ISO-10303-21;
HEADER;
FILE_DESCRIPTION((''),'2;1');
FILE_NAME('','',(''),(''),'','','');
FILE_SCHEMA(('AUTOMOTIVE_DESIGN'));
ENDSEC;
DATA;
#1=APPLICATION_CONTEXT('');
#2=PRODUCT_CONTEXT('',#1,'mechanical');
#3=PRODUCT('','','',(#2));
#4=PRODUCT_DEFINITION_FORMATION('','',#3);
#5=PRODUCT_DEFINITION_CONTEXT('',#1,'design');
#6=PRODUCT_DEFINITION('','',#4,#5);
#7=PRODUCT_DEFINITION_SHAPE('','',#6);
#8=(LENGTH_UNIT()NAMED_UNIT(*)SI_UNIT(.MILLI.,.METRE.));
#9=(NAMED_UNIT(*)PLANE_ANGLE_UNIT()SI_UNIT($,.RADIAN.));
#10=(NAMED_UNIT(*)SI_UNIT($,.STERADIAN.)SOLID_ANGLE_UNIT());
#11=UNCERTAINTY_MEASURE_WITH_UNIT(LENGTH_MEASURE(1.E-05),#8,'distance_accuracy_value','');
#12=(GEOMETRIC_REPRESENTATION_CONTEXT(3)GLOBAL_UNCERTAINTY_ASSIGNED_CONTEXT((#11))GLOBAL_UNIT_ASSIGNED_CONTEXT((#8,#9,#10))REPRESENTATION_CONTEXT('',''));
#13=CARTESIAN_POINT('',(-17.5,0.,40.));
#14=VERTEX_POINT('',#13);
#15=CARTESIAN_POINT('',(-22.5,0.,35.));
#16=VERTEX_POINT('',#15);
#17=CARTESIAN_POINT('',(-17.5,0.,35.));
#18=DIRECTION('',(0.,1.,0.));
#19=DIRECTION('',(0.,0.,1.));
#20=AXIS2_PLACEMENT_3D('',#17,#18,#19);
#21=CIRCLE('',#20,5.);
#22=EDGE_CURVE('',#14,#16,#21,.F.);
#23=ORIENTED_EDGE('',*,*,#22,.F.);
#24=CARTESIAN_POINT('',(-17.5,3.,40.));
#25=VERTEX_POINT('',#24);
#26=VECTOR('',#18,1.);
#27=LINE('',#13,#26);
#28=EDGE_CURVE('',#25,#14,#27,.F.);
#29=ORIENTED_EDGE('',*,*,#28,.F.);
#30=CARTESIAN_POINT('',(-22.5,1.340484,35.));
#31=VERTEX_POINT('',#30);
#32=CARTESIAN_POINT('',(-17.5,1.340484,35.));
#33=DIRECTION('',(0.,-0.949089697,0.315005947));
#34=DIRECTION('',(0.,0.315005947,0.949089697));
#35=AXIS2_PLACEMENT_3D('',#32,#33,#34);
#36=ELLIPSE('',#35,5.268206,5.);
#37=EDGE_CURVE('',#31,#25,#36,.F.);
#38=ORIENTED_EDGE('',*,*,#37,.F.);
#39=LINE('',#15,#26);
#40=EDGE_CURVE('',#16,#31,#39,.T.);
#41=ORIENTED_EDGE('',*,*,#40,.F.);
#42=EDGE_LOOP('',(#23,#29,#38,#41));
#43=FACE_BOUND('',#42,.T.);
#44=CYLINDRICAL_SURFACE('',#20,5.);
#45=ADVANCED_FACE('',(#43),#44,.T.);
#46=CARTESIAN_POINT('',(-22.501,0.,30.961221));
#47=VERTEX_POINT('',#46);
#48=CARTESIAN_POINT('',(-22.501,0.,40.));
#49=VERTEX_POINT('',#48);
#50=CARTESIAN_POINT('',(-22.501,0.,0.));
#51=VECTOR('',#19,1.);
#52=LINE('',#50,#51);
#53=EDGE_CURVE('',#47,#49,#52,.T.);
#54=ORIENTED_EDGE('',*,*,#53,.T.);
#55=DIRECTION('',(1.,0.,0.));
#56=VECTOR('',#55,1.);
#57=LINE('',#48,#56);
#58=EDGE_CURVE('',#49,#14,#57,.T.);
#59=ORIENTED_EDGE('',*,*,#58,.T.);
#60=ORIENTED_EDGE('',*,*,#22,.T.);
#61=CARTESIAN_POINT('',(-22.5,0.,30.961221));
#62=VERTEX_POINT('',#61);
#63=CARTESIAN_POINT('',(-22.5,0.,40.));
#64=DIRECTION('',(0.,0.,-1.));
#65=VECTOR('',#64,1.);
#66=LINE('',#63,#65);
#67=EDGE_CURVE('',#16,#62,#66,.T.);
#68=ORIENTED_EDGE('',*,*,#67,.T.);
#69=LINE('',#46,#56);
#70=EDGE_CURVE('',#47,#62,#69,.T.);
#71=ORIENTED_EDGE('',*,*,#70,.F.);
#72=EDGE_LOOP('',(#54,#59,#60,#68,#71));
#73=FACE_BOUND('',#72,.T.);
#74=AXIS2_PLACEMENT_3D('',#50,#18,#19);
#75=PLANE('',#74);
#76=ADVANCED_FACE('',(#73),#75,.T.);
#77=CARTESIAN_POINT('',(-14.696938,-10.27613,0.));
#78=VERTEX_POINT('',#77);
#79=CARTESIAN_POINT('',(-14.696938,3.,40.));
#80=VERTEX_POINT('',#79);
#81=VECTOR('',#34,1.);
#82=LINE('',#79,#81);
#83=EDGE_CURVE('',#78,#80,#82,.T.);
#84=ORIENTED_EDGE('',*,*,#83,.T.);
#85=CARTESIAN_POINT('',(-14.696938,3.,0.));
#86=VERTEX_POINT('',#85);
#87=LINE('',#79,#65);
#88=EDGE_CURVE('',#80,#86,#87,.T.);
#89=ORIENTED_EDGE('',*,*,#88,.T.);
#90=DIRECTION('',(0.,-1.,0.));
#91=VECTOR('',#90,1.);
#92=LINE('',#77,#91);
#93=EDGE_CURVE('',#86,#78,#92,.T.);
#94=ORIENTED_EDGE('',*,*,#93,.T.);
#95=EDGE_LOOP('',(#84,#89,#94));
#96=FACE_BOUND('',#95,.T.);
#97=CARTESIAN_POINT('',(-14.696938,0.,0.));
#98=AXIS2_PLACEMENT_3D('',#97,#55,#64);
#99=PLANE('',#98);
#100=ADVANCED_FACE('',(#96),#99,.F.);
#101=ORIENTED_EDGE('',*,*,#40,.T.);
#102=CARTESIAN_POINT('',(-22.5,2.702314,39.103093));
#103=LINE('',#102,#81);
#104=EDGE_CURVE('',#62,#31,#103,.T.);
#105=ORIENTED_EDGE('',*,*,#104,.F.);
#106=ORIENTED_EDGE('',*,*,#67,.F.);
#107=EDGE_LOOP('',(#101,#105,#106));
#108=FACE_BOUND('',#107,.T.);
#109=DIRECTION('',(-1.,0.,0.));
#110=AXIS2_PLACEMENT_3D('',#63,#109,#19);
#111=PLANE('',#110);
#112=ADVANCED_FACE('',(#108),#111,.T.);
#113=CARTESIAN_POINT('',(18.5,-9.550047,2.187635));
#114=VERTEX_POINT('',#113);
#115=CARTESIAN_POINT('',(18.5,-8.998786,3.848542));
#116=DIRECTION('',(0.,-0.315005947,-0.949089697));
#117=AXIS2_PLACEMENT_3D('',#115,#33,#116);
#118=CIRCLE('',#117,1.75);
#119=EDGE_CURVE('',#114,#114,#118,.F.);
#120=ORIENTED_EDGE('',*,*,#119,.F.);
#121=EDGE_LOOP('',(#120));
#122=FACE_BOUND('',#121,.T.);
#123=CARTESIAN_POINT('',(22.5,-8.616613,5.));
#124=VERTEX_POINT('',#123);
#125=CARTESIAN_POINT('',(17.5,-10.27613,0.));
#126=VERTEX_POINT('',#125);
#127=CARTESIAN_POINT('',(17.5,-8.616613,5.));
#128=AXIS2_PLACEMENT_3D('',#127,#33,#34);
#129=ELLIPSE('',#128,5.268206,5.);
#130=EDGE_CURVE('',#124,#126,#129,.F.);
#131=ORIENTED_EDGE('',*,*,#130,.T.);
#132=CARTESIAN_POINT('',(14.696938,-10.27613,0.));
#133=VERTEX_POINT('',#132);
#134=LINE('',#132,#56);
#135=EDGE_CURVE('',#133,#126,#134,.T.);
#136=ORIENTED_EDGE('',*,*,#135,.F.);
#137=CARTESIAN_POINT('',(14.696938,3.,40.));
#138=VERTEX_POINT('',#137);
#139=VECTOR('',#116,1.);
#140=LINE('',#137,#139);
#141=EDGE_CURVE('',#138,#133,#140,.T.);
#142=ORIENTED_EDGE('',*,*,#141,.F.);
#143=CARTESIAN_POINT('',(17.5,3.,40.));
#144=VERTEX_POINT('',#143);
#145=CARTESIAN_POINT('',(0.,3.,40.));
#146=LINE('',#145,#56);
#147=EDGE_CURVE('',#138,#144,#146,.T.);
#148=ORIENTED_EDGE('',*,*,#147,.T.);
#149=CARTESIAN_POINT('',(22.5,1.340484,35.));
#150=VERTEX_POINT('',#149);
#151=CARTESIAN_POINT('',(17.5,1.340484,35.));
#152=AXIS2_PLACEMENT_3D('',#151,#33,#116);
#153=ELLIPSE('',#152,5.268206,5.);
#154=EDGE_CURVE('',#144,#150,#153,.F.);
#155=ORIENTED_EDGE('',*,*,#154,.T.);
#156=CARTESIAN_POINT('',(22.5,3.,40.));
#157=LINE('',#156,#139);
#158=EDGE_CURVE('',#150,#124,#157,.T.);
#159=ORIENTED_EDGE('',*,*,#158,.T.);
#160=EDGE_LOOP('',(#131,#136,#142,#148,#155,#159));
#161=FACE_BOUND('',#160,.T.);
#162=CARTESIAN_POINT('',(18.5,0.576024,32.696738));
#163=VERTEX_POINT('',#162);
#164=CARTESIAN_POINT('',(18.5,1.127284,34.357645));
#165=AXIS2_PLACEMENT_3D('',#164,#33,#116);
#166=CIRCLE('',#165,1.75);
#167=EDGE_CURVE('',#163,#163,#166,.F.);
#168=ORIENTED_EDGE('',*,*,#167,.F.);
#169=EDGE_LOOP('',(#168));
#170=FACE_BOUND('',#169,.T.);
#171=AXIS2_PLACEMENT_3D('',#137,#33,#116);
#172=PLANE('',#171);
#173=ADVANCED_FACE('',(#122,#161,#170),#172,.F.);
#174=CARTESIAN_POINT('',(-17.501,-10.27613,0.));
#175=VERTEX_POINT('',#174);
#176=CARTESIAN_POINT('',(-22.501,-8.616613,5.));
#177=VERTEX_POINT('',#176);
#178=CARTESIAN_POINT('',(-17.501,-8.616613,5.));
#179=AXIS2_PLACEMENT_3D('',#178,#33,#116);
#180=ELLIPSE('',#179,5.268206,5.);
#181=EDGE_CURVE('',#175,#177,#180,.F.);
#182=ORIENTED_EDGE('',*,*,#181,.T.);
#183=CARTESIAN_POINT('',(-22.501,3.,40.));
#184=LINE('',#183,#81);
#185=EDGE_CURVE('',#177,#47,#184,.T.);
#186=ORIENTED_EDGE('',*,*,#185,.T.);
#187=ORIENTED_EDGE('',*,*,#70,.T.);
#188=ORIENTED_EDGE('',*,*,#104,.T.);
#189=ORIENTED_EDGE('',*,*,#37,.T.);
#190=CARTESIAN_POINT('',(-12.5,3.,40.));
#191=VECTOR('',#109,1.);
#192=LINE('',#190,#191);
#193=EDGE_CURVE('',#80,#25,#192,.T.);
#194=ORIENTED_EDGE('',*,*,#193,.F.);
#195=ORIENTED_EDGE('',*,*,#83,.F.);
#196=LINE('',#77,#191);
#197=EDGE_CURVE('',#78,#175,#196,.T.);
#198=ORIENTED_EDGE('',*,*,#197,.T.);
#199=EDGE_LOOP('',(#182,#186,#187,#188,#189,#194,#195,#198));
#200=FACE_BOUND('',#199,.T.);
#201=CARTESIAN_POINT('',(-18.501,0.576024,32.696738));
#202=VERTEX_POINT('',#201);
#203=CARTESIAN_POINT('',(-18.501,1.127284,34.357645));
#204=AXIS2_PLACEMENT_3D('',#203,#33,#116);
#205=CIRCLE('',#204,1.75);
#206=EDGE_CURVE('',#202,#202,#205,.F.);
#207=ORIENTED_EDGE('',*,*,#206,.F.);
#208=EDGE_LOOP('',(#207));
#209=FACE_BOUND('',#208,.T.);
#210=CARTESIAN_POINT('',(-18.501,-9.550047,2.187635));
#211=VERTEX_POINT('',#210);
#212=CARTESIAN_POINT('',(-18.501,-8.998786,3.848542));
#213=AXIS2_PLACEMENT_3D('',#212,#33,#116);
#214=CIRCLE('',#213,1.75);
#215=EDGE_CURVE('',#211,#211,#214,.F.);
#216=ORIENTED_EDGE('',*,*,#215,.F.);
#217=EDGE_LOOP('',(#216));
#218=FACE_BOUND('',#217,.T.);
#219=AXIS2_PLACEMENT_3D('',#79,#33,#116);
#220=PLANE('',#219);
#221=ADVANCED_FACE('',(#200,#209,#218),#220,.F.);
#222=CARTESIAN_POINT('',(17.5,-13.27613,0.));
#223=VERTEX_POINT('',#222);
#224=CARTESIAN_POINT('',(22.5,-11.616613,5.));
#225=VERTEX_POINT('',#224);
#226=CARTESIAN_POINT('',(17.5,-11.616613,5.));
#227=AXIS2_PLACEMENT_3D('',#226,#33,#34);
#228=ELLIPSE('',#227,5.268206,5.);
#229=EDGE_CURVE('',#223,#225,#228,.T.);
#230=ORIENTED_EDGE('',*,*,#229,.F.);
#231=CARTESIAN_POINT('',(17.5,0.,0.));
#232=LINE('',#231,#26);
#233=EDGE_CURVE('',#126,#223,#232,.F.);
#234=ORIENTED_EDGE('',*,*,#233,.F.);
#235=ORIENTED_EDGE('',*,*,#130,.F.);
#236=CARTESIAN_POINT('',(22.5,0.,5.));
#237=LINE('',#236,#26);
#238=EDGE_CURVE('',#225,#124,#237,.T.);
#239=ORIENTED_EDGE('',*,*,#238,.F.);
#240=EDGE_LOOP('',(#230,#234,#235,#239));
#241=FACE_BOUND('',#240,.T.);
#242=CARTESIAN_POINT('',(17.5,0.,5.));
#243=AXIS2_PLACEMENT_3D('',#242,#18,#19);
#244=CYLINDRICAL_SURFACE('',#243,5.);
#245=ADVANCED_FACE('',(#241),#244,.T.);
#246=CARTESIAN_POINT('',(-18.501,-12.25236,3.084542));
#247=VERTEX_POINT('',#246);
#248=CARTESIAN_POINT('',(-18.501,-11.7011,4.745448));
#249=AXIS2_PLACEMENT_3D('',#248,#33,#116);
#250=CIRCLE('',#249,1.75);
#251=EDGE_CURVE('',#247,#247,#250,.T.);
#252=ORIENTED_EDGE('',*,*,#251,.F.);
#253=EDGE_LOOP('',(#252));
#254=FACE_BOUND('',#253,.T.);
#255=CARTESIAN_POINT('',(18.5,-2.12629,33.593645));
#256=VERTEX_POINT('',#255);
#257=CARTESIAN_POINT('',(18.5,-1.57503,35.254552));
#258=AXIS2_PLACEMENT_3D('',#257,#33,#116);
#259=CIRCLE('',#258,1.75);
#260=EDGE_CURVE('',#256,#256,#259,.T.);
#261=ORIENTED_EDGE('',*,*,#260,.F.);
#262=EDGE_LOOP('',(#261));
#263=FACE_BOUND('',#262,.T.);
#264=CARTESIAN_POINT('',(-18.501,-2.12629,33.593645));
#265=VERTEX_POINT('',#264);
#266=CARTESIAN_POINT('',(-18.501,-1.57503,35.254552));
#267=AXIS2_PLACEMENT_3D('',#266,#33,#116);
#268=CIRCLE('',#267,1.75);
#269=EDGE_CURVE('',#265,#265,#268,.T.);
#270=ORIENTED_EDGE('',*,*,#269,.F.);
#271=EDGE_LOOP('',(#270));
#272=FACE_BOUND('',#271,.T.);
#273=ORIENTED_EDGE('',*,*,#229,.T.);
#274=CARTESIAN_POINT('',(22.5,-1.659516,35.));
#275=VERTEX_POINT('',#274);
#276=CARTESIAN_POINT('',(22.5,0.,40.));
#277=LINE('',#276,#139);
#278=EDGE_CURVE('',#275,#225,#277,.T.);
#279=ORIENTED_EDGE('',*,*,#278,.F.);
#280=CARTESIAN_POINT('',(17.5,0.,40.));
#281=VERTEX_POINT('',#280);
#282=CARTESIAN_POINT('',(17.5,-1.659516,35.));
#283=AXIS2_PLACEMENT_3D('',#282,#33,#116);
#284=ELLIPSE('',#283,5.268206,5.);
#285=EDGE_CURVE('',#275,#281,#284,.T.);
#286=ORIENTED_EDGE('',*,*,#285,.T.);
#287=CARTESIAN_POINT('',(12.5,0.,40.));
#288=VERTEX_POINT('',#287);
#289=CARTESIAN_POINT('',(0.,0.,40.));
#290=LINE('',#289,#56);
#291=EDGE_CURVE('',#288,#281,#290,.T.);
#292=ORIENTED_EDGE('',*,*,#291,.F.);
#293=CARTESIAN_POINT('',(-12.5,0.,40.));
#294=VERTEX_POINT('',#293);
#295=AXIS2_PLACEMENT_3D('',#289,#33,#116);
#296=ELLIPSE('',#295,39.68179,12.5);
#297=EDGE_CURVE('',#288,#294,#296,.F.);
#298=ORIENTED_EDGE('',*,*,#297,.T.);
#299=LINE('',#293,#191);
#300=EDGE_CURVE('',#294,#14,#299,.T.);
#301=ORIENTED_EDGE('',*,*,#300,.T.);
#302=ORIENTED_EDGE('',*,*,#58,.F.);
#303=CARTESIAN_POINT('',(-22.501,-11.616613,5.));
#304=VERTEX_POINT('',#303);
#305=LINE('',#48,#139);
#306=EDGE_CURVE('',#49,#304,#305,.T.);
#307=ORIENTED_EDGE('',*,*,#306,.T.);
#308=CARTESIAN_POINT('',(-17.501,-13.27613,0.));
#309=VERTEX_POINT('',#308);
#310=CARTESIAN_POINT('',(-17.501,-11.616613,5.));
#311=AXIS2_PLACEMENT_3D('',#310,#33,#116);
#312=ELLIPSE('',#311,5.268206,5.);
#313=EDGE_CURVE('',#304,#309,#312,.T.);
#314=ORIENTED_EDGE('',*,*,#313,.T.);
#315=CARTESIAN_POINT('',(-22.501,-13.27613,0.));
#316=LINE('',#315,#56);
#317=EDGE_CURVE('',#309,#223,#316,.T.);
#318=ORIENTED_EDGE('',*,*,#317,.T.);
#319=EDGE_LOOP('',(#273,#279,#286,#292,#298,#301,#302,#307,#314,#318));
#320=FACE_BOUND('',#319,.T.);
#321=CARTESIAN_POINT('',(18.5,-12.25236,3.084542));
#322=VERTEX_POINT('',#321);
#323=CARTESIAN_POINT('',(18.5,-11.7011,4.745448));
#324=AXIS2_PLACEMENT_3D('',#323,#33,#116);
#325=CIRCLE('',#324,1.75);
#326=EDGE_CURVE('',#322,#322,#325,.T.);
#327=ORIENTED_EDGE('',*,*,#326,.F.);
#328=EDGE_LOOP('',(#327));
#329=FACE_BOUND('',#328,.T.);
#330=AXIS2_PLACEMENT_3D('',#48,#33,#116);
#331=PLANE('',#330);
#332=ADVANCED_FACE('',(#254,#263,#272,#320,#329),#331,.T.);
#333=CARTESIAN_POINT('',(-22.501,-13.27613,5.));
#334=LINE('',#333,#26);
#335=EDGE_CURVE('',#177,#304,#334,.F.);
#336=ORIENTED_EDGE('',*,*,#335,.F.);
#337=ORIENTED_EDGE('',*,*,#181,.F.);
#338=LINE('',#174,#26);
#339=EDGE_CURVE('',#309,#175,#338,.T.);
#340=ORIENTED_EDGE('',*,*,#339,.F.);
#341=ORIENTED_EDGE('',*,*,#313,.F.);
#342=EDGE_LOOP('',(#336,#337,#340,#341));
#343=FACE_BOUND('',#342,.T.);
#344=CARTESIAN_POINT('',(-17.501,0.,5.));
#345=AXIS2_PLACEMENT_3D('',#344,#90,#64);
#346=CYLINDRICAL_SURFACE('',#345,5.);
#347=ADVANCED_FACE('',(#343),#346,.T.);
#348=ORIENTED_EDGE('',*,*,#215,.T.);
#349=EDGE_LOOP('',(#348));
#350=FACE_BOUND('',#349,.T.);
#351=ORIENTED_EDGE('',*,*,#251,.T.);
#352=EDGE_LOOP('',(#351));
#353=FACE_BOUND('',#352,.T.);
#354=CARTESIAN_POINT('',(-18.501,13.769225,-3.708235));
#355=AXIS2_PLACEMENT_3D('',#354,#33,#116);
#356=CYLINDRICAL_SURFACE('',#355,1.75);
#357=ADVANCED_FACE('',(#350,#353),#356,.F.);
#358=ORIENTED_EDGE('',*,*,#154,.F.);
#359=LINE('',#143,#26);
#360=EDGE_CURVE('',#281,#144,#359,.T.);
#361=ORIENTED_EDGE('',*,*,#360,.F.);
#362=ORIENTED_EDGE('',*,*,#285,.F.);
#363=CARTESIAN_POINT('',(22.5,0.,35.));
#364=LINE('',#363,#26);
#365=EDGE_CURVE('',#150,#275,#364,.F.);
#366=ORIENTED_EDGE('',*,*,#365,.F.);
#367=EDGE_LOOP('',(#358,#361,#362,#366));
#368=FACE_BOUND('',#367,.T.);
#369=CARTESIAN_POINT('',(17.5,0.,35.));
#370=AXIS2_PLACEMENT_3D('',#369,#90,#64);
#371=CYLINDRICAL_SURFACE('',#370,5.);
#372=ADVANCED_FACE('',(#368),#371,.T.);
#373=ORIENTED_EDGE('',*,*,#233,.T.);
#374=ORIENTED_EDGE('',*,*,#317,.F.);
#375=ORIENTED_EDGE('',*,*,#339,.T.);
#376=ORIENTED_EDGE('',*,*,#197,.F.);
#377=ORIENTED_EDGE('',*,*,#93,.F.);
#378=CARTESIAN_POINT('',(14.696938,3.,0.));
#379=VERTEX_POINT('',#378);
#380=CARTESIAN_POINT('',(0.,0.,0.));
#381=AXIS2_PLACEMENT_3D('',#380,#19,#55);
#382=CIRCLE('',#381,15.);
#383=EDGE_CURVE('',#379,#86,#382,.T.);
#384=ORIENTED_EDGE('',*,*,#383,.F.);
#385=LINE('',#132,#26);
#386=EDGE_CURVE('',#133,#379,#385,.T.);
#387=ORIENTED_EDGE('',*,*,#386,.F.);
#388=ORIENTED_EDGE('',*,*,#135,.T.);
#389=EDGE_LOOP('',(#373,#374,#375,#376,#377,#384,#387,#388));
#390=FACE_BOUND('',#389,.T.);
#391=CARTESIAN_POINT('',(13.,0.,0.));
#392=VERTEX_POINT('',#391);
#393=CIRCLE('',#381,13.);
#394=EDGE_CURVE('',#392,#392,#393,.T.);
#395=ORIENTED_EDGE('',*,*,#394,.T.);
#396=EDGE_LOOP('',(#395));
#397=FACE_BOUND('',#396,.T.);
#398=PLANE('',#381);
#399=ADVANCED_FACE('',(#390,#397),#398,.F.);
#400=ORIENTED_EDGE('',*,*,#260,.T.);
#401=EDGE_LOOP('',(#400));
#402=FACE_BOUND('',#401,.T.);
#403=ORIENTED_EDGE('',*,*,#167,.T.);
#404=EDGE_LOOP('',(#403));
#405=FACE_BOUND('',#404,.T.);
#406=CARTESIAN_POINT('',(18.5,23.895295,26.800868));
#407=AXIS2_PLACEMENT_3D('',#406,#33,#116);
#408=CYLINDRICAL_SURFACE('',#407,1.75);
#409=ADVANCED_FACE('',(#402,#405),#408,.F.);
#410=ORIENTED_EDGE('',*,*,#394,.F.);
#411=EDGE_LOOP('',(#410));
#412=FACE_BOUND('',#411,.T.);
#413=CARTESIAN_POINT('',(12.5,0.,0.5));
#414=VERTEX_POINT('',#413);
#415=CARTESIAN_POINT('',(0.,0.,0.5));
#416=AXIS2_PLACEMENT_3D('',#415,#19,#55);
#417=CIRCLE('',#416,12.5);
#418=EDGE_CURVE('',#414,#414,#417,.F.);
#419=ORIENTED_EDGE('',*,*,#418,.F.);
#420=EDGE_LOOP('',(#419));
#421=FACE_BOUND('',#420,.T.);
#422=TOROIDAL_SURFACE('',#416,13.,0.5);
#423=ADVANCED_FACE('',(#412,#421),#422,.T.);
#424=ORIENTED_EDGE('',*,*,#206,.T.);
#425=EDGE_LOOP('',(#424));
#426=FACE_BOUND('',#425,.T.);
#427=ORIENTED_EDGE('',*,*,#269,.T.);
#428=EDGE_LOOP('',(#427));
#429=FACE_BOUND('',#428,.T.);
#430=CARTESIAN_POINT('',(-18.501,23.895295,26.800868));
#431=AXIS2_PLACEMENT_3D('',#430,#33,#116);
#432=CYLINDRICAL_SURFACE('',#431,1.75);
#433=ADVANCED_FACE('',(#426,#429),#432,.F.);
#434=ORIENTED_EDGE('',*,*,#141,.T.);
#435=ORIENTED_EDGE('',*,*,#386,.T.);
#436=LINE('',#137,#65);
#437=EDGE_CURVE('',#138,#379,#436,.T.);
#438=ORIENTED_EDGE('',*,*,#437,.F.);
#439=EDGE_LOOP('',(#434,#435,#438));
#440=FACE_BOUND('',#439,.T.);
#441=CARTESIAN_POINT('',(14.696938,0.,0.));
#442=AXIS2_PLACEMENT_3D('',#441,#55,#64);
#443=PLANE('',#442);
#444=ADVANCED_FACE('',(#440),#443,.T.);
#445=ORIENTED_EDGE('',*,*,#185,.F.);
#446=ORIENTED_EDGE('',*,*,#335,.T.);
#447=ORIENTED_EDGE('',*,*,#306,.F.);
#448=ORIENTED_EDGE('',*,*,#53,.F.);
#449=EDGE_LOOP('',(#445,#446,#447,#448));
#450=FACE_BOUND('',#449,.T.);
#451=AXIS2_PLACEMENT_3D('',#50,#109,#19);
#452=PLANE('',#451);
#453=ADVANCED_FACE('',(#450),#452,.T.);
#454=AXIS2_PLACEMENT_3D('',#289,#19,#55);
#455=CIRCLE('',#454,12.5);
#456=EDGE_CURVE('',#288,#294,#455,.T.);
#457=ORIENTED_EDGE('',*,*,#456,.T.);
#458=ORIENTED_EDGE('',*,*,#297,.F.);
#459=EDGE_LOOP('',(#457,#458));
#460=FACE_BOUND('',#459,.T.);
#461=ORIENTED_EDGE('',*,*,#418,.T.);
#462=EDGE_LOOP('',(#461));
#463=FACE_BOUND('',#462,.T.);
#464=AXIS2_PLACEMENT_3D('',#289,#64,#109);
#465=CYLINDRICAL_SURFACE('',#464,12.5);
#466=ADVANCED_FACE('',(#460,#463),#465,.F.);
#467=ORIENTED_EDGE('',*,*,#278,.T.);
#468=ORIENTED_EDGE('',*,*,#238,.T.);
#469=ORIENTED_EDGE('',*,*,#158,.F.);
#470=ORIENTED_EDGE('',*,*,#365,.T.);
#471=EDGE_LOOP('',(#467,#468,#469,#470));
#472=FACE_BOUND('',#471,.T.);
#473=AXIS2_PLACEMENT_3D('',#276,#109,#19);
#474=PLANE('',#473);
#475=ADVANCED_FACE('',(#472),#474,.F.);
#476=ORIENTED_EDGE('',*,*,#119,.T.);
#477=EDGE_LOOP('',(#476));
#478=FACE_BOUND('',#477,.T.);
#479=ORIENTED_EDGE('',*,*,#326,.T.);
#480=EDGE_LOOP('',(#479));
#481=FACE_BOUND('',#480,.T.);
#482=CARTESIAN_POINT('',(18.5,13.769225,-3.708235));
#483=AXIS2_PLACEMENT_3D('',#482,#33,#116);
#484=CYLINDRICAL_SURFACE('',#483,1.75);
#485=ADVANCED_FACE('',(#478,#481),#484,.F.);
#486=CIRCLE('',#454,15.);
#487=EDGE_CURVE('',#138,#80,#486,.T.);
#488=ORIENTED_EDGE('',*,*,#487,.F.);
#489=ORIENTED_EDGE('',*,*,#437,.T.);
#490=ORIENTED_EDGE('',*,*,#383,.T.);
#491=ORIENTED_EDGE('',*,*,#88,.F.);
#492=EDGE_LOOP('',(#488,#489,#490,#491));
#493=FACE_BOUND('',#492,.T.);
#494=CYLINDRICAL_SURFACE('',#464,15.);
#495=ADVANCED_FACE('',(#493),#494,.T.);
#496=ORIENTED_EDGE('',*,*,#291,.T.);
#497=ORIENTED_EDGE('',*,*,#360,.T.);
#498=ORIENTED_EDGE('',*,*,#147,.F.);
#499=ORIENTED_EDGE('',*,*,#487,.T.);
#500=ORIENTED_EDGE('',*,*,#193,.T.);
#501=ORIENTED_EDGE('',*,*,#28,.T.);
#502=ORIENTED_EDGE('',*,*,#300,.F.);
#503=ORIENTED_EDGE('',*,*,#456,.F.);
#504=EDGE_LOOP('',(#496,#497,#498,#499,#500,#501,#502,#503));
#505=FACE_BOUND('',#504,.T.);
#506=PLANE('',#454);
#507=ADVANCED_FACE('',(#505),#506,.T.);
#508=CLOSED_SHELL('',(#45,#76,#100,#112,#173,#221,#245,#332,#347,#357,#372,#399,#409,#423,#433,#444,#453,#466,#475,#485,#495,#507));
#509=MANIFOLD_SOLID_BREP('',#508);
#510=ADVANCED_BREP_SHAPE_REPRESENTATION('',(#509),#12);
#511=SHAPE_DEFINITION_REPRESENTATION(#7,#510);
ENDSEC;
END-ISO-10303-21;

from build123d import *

# Parameters (mm, degrees)
EXTRUDE_1_DEPTH     = 40
EXTRUDE_START       = -45.001
EXTRUDE_2_DEPTH     = 45.001
EXTRUDE_2_2_DEPTH   = 41
SKETCH_4_R          = 1.75
CUT_EXTRUDE_1_DEPTH = 51.311943761
CUT_EXTRUDE_2_DEPTH = 7.803062
CUT_EXTRUDE_3_DEPTH = 7.804062
FILLET_6_R          = 5
FILLET_7_R          = 0.5


with BuildPart() as part:
    # ｽｹｯﾁ1 → ﾎﾞｽ - 押し出し1 (new body)
    with BuildSketch(Plane.XY):
        with BuildLine():
            Line((-14.696938457, 3), (-22.5, 3))
            Line((-22.5, 3), (-22.5, 0))
            Line((-22.5, 0), (-12.5, 0))
            ThreePointArc((-12.5, 0), (0, 12.5), (12.5, 0))
            Line((12.5, 0), (22.5, 0))
            Line((22.5, 0), (22.5, 3))
            Line((22.5, 3), (14.696938457, 3))
            ThreePointArc((14.696938457, 3), (0, 15), (-14.696938457, 3))
        make_face()
    extrude(amount=EXTRUDE_1_DEPTH)

    # ﾎﾞｽ - 押し出し2: read off the stored shape, not the designer's step
    # ﾎﾞｽ - 押し出し2 outline → ﾎﾞｽ - 押し出し2 (add)
    with BuildSketch(Plane(origin=(22.5, 0, 0), x_dir=(0, 0, -1), z_dir=(1, 0, 0)).offset(EXTRUDE_START)):
        Polygon((0, -13.276129684), (0, 0), (-40, 0), align=None)
    extrude(amount=EXTRUDE_2_DEPTH)

    # Extrude 2 2 outline → Extrude 2 2 (cut)
    with BuildSketch(Plane.XY):
        with BuildLine():
            ThreePointArc((-12.5, 0), (0, -12.5), (12.5, 0))
            Line((12.5, 0), (-12.5, 0))
        make_face()
    extrude(amount=EXTRUDE_2_2_DEPTH, mode=Mode.SUBTRACT)

    # ｽｹｯﾁ4 → ｶｯﾄ - 押し出し1 (cut, through all)
    with BuildSketch(Plane(origin=(0, -11.958755971, 3.969149878), x_dir=(-1, 0, 0), z_dir=(0, -0.9490896970518627, 0.31500594748354094))):
        with Locations(Location((18.501, -32.963587882, 0), (0, 0, 90))):
            Circle(SKETCH_4_R)
        with Locations(Location((18.501, -0.81794019, 0), (0, 0, 90))):
            Circle(SKETCH_4_R)
        with Locations(Location((-18.5, -32.963587882, 0), (0, 0, 90))):
            Circle(SKETCH_4_R)
        with Locations(Location((-18.5, -0.81794019, 0), (0, 0, 90))):
            Circle(SKETCH_4_R)
    extrude(amount=-CUT_EXTRUDE_1_DEPTH, mode=Mode.SUBTRACT)

    # ｽｹｯﾁ5 → ｶｯﾄ - 押し出し2 (cut)
    with BuildSketch(Plane(origin=(22.5, 0, 0), x_dir=(0, 0, -1), z_dir=(1, 0, 0))):
        Polygon((-40, 3), (0, -10.276129684), (0, 3.043212606), align=None)
    extrude(amount=-CUT_EXTRUDE_2_DEPTH, mode=Mode.SUBTRACT)

    # ｽｹｯﾁ7 → ｶｯﾄ - 押し出し3 (cut)
    with BuildSketch(Plane.ZY.offset(22.501)):
        Polygon((0, 3), (40, 3), (0, -10.276129684), align=None)
    extrude(amount=-CUT_EXTRUDE_3_DEPTH, mode=Mode.SUBTRACT)

    # ﾌｨﾚｯﾄ6
    fillet_6_edges = [part.edges().sort_by_distance(p)[0] for p in [
        (22.5, -11.776129684, 0),
        (22.5, 1.5, 40),
        (-22.5, 1.5, 40),
        (-22.501, -11.776129684, 0),
    ]]
    fillet(fillet_6_edges, radius=FILLET_6_R)

    # ﾌｨﾚｯﾄ7
    fillet_7_edges = [part.edges().sort_by_distance(p)[0] for p in [
        (12.5, 0, 0),
    ]]
    fillet(fillet_7_edges, radius=FILLET_7_R)


solid = part.part
